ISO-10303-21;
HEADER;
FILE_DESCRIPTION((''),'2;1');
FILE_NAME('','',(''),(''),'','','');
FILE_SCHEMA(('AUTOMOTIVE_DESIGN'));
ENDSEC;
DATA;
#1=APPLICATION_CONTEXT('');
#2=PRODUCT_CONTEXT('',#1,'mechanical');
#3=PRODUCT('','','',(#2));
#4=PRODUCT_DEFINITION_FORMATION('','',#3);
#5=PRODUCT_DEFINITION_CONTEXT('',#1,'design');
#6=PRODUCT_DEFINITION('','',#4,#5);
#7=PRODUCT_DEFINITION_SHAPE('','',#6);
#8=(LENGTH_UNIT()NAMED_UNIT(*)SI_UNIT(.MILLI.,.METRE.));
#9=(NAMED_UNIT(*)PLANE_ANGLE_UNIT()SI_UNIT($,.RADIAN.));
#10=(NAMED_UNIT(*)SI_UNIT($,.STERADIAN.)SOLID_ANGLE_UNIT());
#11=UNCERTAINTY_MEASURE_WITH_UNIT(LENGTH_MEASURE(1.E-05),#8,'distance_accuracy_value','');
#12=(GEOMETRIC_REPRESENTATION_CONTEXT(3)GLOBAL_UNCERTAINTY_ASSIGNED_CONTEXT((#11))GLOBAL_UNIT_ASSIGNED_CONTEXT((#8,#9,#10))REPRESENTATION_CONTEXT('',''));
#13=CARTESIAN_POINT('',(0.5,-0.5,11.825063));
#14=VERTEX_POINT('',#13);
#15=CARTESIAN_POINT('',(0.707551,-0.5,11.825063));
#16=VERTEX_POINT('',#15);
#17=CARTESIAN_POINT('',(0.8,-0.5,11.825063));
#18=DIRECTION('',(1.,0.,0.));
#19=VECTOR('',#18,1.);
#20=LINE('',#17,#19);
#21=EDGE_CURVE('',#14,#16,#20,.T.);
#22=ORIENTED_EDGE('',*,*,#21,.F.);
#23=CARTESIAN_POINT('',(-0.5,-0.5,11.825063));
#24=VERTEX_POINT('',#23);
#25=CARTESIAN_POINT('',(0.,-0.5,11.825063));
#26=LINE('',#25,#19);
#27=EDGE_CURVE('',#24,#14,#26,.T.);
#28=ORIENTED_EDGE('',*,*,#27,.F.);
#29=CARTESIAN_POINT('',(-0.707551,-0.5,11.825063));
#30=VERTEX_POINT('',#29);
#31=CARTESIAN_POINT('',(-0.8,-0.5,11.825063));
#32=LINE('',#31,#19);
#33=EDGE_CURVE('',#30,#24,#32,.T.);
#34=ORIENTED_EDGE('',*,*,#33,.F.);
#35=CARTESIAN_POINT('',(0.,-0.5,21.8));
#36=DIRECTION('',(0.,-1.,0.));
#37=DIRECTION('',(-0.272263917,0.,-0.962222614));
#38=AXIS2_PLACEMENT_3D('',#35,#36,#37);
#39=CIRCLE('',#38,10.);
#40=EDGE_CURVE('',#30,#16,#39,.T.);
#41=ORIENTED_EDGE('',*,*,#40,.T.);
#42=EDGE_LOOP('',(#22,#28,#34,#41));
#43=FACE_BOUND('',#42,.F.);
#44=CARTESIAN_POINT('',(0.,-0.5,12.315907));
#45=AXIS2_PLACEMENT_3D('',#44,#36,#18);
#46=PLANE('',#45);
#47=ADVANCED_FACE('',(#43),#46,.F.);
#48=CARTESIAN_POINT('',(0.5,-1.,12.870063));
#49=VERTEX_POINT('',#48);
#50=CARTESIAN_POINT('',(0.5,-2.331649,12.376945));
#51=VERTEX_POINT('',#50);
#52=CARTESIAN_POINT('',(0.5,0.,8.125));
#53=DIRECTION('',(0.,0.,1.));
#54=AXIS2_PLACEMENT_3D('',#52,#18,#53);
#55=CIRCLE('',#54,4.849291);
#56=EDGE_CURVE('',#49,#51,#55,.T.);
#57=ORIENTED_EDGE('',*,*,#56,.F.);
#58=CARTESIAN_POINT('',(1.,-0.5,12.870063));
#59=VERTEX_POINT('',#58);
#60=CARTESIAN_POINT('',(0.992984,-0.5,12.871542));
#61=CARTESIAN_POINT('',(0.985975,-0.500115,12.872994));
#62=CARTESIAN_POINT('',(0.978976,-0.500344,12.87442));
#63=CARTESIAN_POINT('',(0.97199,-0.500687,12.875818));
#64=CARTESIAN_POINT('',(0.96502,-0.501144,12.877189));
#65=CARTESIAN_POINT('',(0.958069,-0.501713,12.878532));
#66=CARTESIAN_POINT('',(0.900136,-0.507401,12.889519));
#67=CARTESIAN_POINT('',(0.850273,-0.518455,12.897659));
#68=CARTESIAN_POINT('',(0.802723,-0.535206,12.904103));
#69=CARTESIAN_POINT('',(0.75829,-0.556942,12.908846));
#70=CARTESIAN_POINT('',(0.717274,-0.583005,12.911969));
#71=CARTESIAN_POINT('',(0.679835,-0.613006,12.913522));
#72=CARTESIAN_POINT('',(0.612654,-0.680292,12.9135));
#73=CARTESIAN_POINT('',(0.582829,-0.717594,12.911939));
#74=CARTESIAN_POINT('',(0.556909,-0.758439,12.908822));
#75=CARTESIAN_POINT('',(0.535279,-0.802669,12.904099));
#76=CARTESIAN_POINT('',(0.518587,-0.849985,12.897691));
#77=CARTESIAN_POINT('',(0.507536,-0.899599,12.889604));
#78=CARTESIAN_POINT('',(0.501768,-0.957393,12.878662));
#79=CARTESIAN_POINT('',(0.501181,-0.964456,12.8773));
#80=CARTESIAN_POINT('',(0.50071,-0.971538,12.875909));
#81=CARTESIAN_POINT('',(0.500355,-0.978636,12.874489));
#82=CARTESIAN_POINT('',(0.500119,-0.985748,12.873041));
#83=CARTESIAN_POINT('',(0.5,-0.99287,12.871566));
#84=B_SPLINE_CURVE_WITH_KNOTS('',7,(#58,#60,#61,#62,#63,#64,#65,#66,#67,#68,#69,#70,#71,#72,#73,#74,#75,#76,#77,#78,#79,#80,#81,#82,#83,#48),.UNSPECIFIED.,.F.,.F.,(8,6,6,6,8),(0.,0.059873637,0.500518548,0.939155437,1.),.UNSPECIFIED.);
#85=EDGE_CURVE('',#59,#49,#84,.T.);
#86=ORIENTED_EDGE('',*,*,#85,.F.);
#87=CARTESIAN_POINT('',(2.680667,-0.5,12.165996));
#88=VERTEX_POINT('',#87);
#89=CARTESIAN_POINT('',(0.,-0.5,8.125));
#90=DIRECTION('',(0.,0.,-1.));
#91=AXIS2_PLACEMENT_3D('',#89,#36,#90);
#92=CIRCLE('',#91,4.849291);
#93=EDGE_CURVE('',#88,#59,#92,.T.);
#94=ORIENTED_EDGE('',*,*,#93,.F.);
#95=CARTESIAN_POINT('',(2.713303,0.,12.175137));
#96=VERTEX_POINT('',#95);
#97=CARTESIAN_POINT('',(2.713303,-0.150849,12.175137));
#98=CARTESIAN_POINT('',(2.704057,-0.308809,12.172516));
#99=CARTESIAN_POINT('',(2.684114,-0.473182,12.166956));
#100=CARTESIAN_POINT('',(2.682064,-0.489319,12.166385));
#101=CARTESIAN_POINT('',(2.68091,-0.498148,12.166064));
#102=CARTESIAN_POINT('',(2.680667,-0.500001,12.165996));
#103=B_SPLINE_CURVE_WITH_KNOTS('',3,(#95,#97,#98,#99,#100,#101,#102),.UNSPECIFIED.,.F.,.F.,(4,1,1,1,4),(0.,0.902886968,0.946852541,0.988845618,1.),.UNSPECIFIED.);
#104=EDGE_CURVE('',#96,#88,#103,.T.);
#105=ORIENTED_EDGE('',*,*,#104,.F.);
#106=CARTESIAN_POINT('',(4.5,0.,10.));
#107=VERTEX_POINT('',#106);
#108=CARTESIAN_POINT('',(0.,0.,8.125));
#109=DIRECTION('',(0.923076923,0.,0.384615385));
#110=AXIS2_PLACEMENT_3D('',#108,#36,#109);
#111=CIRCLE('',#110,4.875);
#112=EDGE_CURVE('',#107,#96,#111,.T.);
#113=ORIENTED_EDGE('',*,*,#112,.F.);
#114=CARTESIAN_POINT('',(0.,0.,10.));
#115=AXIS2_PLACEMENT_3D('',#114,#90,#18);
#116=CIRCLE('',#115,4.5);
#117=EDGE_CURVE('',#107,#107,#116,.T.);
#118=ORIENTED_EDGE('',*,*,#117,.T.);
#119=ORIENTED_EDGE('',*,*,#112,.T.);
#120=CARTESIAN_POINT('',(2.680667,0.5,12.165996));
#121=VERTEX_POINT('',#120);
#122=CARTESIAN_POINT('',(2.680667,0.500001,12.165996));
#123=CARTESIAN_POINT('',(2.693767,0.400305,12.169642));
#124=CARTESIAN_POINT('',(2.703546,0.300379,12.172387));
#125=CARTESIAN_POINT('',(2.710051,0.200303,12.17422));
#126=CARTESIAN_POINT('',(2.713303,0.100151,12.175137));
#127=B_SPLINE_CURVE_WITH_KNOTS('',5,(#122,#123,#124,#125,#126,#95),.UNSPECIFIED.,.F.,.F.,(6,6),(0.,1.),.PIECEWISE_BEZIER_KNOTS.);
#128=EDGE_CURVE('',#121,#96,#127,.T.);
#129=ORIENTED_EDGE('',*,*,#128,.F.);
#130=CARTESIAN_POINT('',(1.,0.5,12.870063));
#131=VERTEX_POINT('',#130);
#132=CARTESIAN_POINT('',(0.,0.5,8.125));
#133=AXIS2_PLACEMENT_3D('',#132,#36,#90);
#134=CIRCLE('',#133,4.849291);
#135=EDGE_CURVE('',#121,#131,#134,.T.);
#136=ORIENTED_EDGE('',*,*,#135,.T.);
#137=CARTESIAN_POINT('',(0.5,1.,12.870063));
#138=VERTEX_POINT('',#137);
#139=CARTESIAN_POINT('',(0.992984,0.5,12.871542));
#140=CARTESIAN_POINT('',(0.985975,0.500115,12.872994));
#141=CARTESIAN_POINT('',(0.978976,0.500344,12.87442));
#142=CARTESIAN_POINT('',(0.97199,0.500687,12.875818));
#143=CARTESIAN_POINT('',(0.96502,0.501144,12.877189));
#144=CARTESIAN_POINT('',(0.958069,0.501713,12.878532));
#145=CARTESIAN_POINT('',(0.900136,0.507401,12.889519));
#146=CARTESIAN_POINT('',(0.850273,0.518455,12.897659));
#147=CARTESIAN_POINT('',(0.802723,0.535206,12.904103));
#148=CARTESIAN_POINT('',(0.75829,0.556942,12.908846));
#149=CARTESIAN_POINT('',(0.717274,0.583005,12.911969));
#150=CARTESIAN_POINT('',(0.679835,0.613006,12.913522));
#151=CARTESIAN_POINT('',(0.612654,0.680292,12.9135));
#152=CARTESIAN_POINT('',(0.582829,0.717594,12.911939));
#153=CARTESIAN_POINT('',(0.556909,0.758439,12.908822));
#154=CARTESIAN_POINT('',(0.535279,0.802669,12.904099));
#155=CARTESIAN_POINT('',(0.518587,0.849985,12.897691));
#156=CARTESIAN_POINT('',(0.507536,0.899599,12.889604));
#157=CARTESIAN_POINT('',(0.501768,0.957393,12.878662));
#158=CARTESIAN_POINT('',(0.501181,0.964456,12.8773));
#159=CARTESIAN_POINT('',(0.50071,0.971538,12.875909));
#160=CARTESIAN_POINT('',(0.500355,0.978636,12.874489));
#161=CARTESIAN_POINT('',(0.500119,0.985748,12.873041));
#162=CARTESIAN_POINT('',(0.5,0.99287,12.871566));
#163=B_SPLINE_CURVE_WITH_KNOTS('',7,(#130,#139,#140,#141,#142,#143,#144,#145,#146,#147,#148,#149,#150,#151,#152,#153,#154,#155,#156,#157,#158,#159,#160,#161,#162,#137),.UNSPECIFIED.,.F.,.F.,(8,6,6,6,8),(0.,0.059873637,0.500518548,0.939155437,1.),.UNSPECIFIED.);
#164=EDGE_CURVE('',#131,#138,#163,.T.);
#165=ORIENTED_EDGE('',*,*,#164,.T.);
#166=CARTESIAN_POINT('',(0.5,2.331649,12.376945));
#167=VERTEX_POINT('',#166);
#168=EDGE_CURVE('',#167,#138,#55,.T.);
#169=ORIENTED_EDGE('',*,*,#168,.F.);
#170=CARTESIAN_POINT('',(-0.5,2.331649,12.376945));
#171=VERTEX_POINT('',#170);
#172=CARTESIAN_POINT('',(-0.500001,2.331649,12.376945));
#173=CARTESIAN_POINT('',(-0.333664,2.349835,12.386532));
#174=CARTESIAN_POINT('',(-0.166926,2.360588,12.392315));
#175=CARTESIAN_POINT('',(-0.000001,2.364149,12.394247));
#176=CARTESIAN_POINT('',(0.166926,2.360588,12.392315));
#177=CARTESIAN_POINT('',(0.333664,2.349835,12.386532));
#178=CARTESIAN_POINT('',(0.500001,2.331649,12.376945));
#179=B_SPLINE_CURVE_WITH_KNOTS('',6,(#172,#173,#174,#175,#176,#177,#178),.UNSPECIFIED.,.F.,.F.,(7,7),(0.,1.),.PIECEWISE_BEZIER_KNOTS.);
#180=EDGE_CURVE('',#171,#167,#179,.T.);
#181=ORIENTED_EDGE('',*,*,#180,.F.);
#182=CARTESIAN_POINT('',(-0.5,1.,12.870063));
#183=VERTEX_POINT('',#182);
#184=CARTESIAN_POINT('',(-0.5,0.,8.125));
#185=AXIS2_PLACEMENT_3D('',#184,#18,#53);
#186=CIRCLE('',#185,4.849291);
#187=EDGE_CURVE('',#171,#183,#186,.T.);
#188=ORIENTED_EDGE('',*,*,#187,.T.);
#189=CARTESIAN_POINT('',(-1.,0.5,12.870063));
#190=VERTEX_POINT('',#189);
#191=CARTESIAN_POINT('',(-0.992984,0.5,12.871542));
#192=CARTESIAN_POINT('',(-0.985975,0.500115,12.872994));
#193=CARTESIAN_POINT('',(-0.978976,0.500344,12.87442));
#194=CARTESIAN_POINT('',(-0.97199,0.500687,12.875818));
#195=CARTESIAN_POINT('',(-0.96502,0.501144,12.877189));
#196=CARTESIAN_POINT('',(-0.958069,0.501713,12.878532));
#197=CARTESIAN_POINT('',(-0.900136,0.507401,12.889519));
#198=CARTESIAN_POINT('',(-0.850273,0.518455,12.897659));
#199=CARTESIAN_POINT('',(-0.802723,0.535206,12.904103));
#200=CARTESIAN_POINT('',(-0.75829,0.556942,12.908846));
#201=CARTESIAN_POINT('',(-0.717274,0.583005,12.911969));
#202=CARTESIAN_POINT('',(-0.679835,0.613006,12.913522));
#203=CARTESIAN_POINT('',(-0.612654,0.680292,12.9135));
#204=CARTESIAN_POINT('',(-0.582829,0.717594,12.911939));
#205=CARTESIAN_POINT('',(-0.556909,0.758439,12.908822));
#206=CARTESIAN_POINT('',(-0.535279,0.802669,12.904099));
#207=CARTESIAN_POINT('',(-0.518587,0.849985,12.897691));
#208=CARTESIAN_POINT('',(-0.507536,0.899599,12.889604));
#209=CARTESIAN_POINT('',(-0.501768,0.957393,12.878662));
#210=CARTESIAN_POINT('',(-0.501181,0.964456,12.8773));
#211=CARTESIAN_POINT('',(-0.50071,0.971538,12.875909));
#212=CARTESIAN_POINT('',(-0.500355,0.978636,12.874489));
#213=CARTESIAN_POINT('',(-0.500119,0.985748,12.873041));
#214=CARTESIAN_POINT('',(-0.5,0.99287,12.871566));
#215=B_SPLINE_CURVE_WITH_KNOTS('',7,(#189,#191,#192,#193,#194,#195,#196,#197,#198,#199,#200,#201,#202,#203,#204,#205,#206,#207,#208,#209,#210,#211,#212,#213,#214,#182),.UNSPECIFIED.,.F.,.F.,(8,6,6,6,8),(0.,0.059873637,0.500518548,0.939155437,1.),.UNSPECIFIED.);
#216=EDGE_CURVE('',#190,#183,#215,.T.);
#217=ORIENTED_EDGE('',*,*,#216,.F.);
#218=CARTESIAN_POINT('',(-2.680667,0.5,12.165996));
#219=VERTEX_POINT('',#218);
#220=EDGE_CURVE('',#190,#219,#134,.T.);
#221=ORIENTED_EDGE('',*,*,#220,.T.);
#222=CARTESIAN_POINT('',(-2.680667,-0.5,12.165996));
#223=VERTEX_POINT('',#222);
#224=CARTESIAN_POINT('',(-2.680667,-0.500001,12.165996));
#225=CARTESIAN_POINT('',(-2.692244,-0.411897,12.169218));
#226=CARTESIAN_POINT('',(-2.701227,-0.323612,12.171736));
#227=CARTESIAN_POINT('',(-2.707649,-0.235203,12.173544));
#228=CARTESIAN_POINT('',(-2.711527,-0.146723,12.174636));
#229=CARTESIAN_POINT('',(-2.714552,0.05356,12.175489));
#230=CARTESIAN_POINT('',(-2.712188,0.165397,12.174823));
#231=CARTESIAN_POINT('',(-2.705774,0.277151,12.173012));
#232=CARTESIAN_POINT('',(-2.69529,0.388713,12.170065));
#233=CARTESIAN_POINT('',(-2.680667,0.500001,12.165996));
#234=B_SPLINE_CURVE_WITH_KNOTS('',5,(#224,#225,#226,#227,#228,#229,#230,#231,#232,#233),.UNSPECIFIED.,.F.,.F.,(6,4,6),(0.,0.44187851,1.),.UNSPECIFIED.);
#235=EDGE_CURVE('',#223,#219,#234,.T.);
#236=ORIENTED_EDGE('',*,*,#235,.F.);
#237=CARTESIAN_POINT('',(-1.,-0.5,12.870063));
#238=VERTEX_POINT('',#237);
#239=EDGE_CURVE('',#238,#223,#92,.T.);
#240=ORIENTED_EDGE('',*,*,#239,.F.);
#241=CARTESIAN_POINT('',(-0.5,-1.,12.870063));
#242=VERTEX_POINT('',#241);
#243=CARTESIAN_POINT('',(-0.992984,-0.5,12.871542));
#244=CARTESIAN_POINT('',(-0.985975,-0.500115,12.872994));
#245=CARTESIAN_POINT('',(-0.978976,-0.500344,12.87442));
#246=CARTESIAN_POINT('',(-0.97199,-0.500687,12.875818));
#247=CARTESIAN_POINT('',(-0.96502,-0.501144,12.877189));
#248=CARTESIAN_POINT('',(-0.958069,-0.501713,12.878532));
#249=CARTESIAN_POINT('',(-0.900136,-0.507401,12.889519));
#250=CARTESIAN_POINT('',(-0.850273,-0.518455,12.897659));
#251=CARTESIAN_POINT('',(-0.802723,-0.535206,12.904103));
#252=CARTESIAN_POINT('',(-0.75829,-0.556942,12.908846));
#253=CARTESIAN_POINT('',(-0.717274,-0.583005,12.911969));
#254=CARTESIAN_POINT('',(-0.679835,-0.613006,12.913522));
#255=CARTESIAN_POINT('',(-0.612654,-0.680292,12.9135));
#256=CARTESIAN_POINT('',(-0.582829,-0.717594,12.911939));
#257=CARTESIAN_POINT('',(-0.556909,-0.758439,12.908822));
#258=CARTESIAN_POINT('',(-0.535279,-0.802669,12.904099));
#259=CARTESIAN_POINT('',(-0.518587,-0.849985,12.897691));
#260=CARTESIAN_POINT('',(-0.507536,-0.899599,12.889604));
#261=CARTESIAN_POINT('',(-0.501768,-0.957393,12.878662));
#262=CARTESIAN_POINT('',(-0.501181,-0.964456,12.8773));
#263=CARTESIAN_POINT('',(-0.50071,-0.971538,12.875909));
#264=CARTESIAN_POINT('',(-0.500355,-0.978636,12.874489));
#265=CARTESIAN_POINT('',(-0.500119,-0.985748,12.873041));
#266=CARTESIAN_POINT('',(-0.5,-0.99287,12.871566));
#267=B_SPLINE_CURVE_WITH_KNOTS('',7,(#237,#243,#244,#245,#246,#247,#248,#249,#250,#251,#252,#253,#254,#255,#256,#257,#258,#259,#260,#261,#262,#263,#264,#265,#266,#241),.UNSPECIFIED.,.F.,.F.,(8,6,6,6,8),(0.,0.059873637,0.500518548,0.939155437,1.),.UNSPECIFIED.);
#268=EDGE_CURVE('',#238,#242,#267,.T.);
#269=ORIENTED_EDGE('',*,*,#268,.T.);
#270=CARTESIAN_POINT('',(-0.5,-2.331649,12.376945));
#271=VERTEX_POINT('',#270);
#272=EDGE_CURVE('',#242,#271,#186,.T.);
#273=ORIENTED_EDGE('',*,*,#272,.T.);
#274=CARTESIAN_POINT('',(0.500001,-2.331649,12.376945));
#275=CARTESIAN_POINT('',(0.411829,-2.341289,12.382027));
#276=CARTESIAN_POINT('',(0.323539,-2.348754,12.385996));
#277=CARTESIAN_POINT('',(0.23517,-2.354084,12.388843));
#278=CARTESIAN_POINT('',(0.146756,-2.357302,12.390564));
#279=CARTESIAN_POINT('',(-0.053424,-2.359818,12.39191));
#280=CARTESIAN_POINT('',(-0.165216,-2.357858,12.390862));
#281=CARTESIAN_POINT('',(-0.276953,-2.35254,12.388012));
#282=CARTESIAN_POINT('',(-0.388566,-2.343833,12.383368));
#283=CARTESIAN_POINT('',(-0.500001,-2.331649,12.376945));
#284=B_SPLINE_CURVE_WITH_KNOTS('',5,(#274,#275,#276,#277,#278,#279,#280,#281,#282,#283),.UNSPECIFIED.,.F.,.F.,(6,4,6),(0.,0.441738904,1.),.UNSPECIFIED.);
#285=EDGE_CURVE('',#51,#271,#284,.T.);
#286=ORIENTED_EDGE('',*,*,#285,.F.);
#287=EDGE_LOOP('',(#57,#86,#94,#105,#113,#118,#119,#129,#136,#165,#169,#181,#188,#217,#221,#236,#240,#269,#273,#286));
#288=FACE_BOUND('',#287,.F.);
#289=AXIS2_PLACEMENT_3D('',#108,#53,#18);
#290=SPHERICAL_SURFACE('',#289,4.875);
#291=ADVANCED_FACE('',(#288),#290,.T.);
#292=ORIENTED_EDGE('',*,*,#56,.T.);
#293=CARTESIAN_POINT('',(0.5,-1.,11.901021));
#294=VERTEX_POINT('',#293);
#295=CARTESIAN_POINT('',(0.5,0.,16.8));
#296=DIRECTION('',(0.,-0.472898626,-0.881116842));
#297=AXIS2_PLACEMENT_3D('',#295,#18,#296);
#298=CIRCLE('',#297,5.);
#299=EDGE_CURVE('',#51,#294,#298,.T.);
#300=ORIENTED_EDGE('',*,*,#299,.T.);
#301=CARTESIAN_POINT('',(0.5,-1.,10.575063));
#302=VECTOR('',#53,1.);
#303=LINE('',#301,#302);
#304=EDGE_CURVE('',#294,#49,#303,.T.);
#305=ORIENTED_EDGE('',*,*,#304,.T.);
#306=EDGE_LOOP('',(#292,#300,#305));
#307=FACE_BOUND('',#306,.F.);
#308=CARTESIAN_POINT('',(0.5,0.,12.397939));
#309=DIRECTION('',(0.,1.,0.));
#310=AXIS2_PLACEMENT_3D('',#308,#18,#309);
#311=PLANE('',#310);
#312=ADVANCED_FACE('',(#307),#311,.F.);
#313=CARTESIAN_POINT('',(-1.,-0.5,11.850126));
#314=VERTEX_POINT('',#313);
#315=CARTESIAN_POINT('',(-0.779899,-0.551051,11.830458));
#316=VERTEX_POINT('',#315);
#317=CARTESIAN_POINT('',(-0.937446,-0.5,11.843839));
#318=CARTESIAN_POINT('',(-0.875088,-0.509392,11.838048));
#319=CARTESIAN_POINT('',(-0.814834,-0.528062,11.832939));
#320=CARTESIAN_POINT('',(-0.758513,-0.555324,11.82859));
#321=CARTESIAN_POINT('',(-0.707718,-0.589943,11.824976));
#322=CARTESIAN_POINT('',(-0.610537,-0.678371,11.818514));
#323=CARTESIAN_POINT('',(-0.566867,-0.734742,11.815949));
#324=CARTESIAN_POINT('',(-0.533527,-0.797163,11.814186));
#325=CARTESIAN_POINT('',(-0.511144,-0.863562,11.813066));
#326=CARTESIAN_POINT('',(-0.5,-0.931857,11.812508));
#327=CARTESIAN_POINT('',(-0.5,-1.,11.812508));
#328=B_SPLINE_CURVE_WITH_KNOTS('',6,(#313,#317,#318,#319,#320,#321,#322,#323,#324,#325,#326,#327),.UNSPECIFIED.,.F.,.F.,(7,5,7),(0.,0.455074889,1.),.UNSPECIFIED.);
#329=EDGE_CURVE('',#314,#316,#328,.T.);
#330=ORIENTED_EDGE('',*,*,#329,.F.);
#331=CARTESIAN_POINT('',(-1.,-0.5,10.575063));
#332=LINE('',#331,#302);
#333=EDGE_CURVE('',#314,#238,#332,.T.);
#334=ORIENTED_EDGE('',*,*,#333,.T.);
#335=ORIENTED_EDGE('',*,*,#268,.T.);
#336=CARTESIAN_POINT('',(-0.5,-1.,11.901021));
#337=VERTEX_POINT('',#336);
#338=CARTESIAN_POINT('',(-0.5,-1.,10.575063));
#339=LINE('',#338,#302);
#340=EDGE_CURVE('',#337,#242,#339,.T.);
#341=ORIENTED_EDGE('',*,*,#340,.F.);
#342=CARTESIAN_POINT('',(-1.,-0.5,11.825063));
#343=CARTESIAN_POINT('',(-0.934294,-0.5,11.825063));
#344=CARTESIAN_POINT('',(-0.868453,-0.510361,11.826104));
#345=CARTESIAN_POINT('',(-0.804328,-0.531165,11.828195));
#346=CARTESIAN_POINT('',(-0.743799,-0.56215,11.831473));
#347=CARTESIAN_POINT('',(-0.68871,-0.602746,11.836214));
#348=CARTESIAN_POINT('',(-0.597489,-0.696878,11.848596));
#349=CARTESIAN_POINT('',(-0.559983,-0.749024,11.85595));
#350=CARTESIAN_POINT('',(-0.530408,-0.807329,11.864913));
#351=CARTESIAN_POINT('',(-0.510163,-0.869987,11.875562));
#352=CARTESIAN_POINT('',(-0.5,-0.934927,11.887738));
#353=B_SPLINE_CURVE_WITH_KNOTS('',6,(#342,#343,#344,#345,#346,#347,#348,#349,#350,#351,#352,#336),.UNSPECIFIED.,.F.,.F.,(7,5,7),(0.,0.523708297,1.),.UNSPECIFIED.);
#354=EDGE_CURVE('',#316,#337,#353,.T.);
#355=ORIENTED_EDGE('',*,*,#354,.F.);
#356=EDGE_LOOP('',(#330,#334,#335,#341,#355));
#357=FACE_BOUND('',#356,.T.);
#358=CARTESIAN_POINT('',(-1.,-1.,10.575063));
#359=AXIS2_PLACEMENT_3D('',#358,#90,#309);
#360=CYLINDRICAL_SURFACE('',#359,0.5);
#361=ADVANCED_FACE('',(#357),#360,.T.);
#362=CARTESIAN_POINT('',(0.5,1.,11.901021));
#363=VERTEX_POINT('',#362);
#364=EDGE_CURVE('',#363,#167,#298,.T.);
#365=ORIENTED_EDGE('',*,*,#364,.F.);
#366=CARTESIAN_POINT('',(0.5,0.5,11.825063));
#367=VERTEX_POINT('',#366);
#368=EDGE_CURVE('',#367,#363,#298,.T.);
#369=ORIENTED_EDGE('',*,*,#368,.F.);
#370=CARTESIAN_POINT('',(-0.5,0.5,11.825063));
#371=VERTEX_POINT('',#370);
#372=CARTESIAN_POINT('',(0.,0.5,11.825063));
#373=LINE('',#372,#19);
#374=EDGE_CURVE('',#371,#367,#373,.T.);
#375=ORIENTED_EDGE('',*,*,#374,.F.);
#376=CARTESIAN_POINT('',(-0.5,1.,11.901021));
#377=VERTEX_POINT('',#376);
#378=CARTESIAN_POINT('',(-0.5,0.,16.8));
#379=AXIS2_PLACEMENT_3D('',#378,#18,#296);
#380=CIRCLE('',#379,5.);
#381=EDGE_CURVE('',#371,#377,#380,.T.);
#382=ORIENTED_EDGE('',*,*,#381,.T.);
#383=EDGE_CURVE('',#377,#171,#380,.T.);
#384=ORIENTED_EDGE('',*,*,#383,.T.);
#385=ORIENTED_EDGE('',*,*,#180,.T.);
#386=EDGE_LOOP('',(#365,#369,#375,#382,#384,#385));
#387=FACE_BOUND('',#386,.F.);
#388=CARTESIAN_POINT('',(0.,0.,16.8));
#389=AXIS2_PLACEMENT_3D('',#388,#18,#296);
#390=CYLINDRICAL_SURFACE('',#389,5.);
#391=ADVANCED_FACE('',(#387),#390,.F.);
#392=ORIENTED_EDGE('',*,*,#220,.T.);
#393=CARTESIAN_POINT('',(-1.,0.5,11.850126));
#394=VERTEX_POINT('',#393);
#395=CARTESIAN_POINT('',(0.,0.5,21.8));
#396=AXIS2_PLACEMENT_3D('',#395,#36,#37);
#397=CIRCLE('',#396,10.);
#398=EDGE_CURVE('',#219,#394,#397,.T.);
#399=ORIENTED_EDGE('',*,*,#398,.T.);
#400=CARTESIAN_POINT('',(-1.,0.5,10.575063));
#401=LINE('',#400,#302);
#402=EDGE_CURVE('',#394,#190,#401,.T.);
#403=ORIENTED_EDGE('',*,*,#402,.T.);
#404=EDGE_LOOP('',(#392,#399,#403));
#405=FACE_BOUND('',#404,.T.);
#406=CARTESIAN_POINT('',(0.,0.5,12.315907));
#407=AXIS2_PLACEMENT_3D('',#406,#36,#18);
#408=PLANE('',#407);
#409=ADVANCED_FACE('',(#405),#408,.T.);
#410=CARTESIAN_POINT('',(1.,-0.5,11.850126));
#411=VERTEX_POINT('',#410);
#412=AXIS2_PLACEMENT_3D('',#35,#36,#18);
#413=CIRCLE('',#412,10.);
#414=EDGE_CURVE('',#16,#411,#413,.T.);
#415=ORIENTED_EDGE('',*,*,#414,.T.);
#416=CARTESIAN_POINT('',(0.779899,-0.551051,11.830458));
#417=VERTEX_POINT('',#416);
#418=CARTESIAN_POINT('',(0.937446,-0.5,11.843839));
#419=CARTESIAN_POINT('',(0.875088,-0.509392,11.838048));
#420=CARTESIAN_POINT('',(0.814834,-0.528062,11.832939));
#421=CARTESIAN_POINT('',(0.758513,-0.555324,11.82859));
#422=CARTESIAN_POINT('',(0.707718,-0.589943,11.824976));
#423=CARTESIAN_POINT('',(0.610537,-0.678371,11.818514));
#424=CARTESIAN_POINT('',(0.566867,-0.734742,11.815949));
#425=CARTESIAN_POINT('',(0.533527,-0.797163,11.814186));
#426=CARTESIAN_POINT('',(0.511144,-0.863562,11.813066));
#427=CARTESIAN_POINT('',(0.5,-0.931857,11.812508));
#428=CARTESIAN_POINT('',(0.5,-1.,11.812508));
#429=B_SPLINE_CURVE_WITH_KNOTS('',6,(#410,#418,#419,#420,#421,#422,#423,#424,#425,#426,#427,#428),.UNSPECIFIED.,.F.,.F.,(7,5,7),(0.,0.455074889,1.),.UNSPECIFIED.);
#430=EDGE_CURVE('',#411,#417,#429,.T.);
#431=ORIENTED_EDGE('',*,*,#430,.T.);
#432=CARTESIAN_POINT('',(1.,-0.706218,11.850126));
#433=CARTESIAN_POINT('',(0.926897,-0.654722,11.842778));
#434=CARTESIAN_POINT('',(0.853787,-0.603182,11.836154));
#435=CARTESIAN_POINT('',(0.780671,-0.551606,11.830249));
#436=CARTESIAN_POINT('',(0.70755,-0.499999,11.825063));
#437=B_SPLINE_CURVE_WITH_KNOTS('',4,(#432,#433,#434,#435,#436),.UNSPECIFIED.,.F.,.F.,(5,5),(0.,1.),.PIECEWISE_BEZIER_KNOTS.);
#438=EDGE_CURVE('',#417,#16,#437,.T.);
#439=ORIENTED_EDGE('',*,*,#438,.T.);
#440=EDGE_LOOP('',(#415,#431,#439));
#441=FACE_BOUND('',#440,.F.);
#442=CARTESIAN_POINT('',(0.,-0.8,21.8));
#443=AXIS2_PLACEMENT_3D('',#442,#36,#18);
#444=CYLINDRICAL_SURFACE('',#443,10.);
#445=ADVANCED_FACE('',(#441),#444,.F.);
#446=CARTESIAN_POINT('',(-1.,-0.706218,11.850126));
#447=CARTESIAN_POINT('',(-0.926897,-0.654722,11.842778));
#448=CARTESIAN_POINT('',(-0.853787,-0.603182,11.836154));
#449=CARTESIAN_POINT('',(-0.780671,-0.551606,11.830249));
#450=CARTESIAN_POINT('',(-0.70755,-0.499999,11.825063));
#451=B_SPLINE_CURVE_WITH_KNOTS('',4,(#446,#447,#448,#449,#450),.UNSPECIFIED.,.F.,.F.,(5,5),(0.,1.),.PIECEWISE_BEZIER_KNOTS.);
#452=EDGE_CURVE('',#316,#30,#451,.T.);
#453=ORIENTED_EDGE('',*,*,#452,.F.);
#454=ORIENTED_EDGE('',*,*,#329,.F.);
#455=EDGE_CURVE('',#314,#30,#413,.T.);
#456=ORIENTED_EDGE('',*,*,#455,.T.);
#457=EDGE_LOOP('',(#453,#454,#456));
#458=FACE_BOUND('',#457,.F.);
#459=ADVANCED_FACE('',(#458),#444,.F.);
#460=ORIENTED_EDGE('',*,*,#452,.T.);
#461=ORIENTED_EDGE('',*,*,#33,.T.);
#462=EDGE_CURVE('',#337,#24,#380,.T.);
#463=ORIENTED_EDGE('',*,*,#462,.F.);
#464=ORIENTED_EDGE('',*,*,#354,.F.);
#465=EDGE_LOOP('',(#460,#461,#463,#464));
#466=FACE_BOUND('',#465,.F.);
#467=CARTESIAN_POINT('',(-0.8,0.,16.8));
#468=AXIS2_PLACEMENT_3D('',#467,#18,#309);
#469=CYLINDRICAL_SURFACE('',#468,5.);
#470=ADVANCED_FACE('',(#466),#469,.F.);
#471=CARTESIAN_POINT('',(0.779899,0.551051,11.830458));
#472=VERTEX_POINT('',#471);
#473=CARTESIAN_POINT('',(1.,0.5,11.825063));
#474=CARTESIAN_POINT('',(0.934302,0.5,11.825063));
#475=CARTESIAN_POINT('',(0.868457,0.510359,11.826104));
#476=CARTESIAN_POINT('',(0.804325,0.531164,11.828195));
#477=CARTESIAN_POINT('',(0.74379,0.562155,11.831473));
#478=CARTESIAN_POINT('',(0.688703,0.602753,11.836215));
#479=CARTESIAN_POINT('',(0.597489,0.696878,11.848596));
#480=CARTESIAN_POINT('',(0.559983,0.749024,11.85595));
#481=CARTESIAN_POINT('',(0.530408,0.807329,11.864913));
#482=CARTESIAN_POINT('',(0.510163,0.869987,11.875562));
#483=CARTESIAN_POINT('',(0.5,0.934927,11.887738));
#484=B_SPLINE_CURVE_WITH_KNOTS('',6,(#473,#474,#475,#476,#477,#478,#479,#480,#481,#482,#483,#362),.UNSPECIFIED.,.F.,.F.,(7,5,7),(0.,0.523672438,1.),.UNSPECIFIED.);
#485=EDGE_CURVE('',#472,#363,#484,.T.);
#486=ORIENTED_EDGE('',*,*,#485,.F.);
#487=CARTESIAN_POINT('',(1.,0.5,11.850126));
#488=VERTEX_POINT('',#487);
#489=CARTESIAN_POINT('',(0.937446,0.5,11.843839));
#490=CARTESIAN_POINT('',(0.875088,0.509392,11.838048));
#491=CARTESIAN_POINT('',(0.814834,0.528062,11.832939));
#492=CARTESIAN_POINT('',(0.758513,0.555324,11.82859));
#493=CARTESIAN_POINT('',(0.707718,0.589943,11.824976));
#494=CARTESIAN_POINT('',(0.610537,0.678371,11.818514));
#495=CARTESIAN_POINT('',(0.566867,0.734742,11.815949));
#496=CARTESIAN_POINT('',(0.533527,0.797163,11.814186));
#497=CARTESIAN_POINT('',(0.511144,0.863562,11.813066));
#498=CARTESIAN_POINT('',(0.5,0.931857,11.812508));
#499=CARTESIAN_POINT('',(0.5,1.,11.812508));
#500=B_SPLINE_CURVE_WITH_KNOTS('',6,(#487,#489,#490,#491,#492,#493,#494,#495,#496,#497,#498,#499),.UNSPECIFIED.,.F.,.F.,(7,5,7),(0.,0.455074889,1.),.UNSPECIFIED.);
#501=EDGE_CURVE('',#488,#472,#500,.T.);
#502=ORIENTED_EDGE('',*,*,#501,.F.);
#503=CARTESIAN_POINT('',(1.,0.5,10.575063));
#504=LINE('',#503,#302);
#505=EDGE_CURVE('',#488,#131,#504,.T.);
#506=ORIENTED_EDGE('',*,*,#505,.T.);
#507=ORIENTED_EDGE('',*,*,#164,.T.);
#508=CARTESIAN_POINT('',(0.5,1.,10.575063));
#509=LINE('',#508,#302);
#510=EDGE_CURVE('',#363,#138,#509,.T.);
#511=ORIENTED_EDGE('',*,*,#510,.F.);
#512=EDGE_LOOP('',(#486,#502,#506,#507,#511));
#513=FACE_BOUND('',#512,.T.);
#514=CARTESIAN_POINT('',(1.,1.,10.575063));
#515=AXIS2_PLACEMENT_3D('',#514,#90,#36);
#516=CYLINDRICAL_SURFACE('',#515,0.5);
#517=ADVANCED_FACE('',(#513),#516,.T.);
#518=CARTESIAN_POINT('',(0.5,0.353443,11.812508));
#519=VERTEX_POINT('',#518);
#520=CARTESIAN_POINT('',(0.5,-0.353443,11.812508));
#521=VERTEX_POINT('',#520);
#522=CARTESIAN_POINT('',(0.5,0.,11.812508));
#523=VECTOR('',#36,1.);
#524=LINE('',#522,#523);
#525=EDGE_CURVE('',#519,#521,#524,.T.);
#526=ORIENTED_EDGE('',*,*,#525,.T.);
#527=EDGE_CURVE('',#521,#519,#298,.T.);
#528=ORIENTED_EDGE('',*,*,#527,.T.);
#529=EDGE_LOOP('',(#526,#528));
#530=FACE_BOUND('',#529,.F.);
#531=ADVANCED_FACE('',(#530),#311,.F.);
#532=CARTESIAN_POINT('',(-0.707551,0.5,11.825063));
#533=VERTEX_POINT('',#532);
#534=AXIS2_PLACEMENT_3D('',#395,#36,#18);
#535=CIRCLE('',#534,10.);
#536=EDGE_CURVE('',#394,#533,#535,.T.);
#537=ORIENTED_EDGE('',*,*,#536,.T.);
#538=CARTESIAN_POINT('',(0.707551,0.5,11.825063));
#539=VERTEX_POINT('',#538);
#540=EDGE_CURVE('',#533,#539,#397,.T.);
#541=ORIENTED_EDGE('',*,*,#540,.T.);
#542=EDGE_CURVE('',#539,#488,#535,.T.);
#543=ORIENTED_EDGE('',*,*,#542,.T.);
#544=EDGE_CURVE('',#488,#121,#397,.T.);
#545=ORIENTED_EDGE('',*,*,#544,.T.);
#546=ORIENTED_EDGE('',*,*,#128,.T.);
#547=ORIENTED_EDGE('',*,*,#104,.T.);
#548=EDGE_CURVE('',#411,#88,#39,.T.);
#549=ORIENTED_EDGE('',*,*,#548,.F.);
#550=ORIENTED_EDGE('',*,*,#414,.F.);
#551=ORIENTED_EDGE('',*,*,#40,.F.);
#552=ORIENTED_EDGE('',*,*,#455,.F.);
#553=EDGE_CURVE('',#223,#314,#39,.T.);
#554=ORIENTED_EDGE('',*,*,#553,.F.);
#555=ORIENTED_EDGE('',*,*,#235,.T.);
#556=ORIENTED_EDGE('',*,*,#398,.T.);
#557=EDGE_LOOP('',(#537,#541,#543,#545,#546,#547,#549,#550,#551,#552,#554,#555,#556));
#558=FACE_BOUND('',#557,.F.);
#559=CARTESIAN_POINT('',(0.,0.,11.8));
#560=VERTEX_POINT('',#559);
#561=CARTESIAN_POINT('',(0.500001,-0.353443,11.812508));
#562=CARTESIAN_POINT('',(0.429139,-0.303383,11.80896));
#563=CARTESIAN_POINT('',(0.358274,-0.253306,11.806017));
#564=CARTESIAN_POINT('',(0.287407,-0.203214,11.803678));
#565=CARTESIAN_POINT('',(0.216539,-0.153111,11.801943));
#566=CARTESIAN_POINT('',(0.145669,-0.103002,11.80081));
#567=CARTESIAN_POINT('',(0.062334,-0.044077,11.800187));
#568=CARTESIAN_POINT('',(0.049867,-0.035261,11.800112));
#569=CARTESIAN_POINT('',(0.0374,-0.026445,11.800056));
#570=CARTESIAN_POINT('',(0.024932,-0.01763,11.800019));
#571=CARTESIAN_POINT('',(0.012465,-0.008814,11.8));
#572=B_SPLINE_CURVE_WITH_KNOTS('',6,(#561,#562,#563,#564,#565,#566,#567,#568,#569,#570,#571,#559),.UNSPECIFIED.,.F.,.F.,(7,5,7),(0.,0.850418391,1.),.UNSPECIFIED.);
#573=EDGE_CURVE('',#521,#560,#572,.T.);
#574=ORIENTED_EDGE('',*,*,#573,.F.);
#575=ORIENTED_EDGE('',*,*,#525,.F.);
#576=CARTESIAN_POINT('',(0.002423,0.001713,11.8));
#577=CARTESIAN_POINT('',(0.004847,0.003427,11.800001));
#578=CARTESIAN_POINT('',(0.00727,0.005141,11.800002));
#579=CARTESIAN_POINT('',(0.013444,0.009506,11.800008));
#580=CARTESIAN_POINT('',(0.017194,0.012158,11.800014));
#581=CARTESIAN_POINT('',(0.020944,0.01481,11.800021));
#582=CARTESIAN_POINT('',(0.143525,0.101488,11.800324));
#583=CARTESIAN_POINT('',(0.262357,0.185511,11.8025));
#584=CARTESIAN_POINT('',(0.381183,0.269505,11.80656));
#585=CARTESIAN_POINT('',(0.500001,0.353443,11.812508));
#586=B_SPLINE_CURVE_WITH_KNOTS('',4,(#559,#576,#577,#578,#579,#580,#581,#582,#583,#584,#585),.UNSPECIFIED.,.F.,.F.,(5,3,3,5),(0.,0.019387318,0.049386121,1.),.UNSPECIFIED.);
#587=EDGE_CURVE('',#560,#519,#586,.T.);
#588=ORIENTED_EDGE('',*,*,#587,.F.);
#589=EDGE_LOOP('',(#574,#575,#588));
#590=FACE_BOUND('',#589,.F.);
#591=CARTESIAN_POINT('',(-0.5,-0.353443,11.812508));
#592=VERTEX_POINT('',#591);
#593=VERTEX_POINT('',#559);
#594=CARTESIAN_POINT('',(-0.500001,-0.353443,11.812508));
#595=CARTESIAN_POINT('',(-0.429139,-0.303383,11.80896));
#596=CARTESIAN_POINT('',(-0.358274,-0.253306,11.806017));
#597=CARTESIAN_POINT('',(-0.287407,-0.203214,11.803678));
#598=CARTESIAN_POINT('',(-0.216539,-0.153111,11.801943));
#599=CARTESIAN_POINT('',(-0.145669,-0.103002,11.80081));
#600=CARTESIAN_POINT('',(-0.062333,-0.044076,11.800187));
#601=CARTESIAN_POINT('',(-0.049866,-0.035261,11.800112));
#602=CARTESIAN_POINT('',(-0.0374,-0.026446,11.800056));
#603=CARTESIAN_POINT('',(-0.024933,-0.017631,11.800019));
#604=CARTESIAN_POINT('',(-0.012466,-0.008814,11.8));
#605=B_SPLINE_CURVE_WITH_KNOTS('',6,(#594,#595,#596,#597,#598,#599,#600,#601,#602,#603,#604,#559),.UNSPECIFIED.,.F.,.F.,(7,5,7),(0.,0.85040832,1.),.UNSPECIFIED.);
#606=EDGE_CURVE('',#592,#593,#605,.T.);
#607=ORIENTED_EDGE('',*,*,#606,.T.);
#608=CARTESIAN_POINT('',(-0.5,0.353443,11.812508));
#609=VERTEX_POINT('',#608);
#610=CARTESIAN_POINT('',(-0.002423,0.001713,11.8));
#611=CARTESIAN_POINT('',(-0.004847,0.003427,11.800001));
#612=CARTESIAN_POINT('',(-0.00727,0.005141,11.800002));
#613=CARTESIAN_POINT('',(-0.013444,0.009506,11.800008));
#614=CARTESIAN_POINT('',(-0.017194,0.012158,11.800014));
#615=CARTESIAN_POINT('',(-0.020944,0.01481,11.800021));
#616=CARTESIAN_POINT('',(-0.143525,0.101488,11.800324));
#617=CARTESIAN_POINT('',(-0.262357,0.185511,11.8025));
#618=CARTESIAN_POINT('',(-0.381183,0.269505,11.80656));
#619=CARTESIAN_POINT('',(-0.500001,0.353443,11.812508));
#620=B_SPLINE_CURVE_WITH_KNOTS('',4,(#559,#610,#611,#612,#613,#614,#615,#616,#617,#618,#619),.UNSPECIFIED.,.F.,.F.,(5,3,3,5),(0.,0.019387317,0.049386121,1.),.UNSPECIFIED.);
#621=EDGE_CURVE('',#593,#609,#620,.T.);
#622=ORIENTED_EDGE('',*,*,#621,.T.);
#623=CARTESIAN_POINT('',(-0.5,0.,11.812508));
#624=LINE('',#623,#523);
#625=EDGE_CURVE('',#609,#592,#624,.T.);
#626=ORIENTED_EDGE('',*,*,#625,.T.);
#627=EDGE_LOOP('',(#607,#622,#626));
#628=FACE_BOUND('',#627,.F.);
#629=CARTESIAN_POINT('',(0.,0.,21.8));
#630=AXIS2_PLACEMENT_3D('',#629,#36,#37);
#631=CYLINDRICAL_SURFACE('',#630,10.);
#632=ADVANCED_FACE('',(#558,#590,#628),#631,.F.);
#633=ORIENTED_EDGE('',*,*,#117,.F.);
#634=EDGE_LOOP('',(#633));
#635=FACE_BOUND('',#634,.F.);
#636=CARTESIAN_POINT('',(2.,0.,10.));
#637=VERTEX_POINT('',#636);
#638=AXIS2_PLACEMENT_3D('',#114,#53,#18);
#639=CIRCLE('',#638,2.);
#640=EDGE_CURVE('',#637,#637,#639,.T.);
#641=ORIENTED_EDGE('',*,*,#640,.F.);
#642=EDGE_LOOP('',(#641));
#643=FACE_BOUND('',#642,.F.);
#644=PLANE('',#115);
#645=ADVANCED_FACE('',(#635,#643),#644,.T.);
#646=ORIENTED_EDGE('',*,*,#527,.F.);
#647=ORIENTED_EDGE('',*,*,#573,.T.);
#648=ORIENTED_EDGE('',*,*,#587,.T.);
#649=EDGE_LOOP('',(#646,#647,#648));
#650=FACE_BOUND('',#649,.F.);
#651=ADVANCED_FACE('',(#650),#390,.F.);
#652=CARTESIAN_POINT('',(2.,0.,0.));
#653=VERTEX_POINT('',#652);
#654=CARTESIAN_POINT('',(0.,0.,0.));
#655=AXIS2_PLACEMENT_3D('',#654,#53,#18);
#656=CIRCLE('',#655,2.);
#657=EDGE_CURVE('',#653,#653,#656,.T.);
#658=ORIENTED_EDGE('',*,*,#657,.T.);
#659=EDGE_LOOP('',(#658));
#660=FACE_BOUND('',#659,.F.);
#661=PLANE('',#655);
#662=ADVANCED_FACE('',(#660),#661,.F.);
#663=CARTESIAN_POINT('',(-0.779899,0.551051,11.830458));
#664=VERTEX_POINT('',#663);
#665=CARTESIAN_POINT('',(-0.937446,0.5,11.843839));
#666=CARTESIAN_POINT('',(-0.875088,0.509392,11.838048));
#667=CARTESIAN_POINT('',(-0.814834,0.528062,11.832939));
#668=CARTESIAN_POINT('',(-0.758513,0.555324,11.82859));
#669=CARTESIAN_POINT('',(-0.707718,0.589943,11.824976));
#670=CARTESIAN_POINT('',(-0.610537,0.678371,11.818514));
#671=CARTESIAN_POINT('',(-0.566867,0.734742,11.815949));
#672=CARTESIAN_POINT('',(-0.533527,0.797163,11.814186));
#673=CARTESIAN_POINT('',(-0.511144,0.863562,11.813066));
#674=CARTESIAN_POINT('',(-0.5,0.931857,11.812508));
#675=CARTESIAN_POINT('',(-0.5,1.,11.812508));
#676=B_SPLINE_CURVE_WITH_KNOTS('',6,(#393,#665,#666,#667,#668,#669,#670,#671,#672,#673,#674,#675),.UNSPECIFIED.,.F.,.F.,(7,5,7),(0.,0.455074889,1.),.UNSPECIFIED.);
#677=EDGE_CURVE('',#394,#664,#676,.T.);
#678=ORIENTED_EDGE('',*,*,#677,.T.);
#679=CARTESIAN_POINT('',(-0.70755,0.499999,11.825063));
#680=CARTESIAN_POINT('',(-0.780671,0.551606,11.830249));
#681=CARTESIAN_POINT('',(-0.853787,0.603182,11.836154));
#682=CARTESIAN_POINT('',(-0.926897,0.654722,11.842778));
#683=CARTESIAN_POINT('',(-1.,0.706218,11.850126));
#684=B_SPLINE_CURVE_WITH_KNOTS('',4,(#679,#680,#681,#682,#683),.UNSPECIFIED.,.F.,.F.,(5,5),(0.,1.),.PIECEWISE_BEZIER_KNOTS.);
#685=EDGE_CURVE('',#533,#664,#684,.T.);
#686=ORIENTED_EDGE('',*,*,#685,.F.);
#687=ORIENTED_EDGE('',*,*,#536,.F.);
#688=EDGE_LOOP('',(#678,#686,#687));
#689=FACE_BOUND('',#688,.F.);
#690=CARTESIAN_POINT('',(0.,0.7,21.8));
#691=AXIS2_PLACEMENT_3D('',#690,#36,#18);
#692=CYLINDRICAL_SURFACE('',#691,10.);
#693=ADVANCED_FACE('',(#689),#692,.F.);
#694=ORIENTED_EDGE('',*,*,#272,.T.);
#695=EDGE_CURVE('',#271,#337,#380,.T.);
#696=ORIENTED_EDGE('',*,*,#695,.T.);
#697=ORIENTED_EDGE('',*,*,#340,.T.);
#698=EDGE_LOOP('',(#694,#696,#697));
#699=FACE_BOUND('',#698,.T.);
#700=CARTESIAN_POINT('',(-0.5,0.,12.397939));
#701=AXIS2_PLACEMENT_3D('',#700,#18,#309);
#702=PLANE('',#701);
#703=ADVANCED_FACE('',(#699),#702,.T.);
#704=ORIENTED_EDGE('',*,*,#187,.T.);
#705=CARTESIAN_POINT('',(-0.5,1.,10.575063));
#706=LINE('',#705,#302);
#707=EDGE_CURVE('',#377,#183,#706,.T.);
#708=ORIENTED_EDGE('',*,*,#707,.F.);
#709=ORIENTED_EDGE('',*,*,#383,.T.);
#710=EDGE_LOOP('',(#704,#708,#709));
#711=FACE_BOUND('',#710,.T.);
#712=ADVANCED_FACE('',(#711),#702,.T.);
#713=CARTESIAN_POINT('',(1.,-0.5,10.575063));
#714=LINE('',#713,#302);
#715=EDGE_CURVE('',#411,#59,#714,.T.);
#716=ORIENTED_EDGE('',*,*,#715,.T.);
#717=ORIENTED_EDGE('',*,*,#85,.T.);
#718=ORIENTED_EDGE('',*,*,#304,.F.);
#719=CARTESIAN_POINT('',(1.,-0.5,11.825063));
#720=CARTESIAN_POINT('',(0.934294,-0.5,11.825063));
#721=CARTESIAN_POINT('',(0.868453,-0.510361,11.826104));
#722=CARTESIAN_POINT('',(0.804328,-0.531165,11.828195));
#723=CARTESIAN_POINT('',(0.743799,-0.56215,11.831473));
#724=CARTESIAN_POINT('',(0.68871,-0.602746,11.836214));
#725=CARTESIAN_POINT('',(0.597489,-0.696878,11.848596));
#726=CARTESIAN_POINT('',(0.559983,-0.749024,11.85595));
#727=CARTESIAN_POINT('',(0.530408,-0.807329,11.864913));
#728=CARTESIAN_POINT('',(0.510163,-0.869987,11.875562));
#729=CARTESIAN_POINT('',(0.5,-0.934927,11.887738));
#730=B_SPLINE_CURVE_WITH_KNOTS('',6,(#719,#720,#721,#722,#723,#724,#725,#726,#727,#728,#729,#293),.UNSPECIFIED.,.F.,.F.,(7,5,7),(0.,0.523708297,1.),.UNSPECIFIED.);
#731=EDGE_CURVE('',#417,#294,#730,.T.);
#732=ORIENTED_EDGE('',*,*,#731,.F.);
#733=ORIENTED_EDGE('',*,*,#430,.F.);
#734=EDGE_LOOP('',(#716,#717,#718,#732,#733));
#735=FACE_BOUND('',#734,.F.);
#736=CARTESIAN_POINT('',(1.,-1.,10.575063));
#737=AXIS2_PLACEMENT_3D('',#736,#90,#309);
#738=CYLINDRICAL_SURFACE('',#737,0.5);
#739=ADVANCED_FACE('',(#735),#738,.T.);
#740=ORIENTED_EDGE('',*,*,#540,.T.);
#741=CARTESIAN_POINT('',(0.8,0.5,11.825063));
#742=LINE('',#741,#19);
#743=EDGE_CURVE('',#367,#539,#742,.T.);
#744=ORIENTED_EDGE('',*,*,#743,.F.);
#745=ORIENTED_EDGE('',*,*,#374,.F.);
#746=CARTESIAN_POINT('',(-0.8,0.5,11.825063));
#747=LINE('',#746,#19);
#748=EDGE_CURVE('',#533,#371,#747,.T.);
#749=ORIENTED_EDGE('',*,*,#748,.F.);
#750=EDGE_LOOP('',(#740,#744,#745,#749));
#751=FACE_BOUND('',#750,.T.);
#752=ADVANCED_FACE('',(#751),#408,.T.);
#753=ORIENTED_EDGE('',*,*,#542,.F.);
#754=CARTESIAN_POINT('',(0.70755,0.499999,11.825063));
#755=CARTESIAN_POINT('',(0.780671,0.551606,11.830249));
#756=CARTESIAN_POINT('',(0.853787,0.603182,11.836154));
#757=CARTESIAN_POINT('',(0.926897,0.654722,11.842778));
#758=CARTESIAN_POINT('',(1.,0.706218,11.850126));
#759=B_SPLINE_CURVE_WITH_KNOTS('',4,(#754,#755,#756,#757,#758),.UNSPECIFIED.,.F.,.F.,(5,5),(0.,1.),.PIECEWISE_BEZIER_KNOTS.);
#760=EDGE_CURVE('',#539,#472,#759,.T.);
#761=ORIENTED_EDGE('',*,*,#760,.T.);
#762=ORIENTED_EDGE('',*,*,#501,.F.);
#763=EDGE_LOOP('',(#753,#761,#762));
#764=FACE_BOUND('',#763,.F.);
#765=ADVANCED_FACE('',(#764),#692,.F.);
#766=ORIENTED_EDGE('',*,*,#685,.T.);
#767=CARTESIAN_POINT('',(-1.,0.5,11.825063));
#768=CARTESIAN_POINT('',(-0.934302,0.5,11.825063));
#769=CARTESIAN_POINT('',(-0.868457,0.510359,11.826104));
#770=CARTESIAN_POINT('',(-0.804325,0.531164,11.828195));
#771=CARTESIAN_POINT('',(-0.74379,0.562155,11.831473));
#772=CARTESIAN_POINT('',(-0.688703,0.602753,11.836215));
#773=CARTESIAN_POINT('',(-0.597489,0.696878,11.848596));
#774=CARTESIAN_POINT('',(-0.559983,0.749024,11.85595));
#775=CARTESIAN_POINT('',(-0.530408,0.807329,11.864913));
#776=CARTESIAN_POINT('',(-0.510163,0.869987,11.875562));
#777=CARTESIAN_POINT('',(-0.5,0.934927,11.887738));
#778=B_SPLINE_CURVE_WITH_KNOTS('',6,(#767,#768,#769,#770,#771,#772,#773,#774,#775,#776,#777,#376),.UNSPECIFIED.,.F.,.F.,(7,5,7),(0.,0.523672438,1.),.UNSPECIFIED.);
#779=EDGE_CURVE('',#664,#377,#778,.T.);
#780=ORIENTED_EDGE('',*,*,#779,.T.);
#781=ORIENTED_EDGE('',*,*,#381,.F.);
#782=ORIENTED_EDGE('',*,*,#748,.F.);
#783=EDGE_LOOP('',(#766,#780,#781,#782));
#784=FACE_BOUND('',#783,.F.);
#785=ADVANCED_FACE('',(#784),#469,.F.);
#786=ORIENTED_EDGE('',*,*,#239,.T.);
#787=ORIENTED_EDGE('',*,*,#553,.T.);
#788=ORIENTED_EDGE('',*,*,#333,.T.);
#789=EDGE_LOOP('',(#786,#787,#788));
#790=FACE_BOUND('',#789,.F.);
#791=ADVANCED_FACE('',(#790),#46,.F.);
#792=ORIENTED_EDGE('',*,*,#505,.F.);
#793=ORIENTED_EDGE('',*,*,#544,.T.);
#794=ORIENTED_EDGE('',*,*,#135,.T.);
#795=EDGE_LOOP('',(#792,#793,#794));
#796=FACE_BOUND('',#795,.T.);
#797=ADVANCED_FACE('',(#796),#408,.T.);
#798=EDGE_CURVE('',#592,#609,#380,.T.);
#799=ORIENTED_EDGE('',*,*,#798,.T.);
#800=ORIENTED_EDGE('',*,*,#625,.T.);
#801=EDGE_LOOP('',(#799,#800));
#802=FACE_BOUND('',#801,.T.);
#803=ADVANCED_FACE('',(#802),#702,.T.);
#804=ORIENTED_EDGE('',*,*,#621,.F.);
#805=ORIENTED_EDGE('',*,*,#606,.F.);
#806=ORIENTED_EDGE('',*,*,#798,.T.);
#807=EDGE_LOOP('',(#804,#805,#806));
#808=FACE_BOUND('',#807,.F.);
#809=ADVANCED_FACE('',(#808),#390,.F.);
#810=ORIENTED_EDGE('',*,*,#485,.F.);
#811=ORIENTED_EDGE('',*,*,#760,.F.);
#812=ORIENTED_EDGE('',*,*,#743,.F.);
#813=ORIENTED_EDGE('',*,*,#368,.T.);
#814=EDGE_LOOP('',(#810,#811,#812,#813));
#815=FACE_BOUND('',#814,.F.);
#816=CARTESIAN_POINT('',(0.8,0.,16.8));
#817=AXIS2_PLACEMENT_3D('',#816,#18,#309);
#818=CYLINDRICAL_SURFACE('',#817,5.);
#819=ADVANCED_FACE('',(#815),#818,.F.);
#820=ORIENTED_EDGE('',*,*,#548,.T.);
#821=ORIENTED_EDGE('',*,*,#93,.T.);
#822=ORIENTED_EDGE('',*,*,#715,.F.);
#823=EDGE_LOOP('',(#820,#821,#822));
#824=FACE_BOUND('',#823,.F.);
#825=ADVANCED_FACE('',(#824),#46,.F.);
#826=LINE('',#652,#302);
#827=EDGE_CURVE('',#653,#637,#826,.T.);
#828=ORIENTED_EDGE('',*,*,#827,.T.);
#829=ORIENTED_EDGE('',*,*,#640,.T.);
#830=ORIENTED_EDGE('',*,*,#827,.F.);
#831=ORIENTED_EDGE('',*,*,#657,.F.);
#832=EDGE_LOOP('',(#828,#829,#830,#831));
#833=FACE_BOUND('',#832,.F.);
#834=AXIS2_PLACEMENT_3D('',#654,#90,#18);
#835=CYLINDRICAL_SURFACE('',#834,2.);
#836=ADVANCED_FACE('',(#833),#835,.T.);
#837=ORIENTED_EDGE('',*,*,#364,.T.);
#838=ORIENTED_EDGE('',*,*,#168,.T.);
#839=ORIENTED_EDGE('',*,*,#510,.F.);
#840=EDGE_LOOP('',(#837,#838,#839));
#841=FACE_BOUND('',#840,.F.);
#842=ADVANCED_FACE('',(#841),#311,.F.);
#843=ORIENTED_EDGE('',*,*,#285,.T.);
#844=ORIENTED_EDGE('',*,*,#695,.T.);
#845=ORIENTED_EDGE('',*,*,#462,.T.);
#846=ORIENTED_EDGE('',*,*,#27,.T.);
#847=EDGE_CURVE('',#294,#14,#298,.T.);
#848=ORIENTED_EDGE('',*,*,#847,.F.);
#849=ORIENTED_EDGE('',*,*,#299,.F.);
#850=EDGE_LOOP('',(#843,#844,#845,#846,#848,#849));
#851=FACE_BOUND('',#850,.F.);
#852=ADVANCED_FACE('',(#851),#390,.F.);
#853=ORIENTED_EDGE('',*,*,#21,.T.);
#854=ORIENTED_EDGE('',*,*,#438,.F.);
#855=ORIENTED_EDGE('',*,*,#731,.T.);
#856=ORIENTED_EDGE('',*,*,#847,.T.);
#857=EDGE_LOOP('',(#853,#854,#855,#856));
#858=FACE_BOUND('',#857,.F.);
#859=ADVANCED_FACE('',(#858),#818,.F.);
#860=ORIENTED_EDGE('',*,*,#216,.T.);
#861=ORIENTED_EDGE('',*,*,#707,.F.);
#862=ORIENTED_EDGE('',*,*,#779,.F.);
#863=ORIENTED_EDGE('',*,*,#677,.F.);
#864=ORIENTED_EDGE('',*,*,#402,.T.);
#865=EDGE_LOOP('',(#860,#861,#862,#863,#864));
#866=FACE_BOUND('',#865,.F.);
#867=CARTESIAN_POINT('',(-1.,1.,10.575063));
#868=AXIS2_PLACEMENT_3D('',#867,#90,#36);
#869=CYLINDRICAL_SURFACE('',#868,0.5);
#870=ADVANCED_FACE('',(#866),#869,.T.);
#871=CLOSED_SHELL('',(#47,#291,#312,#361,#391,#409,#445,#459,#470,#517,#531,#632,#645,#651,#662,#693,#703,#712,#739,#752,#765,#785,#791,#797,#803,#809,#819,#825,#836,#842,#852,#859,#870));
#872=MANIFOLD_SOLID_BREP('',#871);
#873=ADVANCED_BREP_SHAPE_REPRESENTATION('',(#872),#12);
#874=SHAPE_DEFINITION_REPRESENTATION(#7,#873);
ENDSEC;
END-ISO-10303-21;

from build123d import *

# Parameters (mm, degrees)
F0_R         = 2
F1_DEPTH     = 10
F5_DEPTH     = 0.5
F7_DEPTH     = 0.5
F8_T4_DEPTH  = 3.6233825309
F8_S5_R      = 10
F8_T6_DEPTH  = 3
F8_S7_R      = 5
F8_T8_DEPTH  = 3
F8_T12_DEPTH = 3.6233825309
F8_S13_R     = 10
F8_T14_DEPTH = 3
F8_S15_R     = 5
F8_T16_DEPTH = 3
F8_T20_DEPTH = 3.6233825309
F8_S21_R     = 10
F8_T22_DEPTH = 3
F8_S23_R     = 5
F8_T24_DEPTH = 3
F8_T28_DEPTH = 3.6233825309
F8_S29_R     = 10
F8_T30_DEPTH = 3
F8_S31_R     = 5
F8_T32_DEPTH = 3


# Not quite as in the source:
# - a fillet or chamfer that OpenCascade refuses, or shapes differently, is made with other operations: its cross-section is extruded or revolved along the edge and cut away or added


with BuildPart() as f1:
    # F0 (on Top) → F1 (new body)
    with BuildSketch(Plane.XY):
        Circle(F0_R)
    extrude(amount=F1_DEPTH)

    # F2 (on Front) → F3 (revolve)
    with BuildSketch(Plane.XZ):
        with BuildLine():
            Line((0, 10), (4.5, 10))
            ThreePointArc((4.5, 10), (2.7041634566, 12.1812451849), (0, 13))
            Line((0, 13), (0, 10))
        make_face()
    revolve(axis=Axis((0, 0, 12.25), (0, 0, -1)))

    # F4 (on Front) → F5 (cut, symmetric)
    with BuildSketch(Plane.XZ):
        with BuildLine():
            ThreePointArc((-2.7226391671, 12.177773856), (0, 11.8), (2.7226391671, 12.177773856))
            ThreePointArc((2.7226391671, 12.177773856), (0, 13), (-2.7226391671, 12.177773856))
        make_face()
    extrude(amount=F5_DEPTH, both=True, mode=Mode.SUBTRACT)

    # F6 (on Right) → F7 (cut, symmetric)
    with BuildSketch(Plane.YZ):
        with BuildLine():
            ThreePointArc((-2.3644931313, 12.3944157899), (0, 11.8), (2.3644931313, 12.3944157899))
            ThreePointArc((2.3644931313, 12.3944157899), (0, 13), (-2.3644931313, 12.3944157899))
        make_face()
    extrude(amount=F7_DEPTH, both=True, mode=Mode.SUBTRACT)

    # F8: fillet of radius 0.5 on 4 edges, made by hand


with BuildPart() as f8_tool2:
    # F8_s3 → F8_t4 (new body)
    with BuildSketch(Plane.XY.offset(10.5750628145)):
        with BuildLine():
            ThreePointArc((1, -0.5), (0.6464466094, -0.6464466094), (0.5, -1))
            Line((0.5, -1), (0.5, -0.5))
            Line((0.5, -0.5), (1, -0.5))
        make_face()
    extrude(amount=F8_T4_DEPTH)

    # F8_s5 → F8_t6 (intersect, symmetric)
    with BuildSketch(Plane.XZ.offset(0.8)):
        with Locations((0, 21.8)):
            Circle(F8_S5_R)
    extrude(amount=F8_T6_DEPTH, both=True, mode=Mode.INTERSECT)

    # F8_s7 → F8_t8 (intersect, symmetric)
    with BuildSketch(Plane.YZ.offset(0.8)):
        with Locations((0, 16.8)):
            Circle(F8_S7_R)
    extrude(amount=F8_T8_DEPTH, both=True, mode=Mode.INTERSECT)


with BuildPart() as f1_1:
    add(f1.part)

    # F8_t1: cut F8_tool2
    add(f8_tool2.part, mode=Mode.SUBTRACT)


with BuildPart() as f8_tool10:
    # F8_s11 → F8_t12 (new body)
    with BuildSketch(Plane.XY.offset(10.5750628145)):
        with BuildLine():
            ThreePointArc((-1, -0.5), (-0.6464466094, -0.6464466094), (-0.5, -1))
            Line((-0.5, -1), (-0.5, -0.5))
            Line((-0.5, -0.5), (-1, -0.5))
        make_face()
    extrude(amount=F8_T12_DEPTH)

    # F8_s13 → F8_t14 (intersect, symmetric)
    with BuildSketch(Plane.XZ.offset(0.8)):
        with Locations((0, 21.8)):
            Circle(F8_S13_R)
    extrude(amount=F8_T14_DEPTH, both=True, mode=Mode.INTERSECT)

    # F8_s15 → F8_t16 (intersect, symmetric)
    with BuildSketch(Plane.YZ.offset(-0.8)):
        with Locations((0, 16.8)):
            Circle(F8_S15_R)
    extrude(amount=F8_T16_DEPTH, both=True, mode=Mode.INTERSECT)


with BuildPart() as f1_2:
    add(f1_1.part)

    # F8_t9: cut F8_tool10
    add(f8_tool10.part, mode=Mode.SUBTRACT)


with BuildPart() as f8_tool18:
    # F8_s19 → F8_t20 (new body)
    with BuildSketch(Plane.XY.offset(10.5750628145)):
        with BuildLine():
            ThreePointArc((-1, 0.5), (-0.6464466094, 0.6464466094), (-0.5, 1))
            Line((-0.5, 1), (-0.5, 0.5))
            Line((-0.5, 0.5), (-1, 0.5))
        make_face()
    extrude(amount=F8_T20_DEPTH)

    # F8_s21 → F8_t22 (intersect, symmetric)
    with BuildSketch(Plane.XZ.offset(-0.7)):
        with Locations((0, 21.8)):
            Circle(F8_S21_R)
    extrude(amount=F8_T22_DEPTH, both=True, mode=Mode.INTERSECT)

    # F8_s23 → F8_t24 (intersect, symmetric)
    with BuildSketch(Plane.YZ.offset(-0.8)):
        with Locations((0, 16.8)):
            Circle(F8_S23_R)
    extrude(amount=F8_T24_DEPTH, both=True, mode=Mode.INTERSECT)


with BuildPart() as f1_3:
    add(f1_2.part)

    # F8_t17: cut F8_tool18
    add(f8_tool18.part, mode=Mode.SUBTRACT)


with BuildPart() as f8_tool26:
    # F8_s27 → F8_t28 (new body)
    with BuildSketch(Plane.XY.offset(10.5750628145)):
        with BuildLine():
            ThreePointArc((1, 0.5), (0.6464466094, 0.6464466094), (0.5, 1))
            Line((0.5, 1), (0.5, 0.5))
            Line((0.5, 0.5), (1, 0.5))
        make_face()
    extrude(amount=F8_T28_DEPTH)

    # F8_s29 → F8_t30 (intersect, symmetric)
    with BuildSketch(Plane.XZ.offset(-0.7)):
        with Locations((0, 21.8)):
            Circle(F8_S29_R)
    extrude(amount=F8_T30_DEPTH, both=True, mode=Mode.INTERSECT)

    # F8_s31 → F8_t32 (intersect, symmetric)
    with BuildSketch(Plane.YZ.offset(0.8)):
        with Locations((0, 16.8)):
            Circle(F8_S31_R)
    extrude(amount=F8_T32_DEPTH, both=True, mode=Mode.INTERSECT)


with BuildPart() as f1_4:
    add(f1_3.part)

    # F8_t25: cut F8_tool26
    add(f8_tool26.part, mode=Mode.SUBTRACT)


solid = f1_4.part
